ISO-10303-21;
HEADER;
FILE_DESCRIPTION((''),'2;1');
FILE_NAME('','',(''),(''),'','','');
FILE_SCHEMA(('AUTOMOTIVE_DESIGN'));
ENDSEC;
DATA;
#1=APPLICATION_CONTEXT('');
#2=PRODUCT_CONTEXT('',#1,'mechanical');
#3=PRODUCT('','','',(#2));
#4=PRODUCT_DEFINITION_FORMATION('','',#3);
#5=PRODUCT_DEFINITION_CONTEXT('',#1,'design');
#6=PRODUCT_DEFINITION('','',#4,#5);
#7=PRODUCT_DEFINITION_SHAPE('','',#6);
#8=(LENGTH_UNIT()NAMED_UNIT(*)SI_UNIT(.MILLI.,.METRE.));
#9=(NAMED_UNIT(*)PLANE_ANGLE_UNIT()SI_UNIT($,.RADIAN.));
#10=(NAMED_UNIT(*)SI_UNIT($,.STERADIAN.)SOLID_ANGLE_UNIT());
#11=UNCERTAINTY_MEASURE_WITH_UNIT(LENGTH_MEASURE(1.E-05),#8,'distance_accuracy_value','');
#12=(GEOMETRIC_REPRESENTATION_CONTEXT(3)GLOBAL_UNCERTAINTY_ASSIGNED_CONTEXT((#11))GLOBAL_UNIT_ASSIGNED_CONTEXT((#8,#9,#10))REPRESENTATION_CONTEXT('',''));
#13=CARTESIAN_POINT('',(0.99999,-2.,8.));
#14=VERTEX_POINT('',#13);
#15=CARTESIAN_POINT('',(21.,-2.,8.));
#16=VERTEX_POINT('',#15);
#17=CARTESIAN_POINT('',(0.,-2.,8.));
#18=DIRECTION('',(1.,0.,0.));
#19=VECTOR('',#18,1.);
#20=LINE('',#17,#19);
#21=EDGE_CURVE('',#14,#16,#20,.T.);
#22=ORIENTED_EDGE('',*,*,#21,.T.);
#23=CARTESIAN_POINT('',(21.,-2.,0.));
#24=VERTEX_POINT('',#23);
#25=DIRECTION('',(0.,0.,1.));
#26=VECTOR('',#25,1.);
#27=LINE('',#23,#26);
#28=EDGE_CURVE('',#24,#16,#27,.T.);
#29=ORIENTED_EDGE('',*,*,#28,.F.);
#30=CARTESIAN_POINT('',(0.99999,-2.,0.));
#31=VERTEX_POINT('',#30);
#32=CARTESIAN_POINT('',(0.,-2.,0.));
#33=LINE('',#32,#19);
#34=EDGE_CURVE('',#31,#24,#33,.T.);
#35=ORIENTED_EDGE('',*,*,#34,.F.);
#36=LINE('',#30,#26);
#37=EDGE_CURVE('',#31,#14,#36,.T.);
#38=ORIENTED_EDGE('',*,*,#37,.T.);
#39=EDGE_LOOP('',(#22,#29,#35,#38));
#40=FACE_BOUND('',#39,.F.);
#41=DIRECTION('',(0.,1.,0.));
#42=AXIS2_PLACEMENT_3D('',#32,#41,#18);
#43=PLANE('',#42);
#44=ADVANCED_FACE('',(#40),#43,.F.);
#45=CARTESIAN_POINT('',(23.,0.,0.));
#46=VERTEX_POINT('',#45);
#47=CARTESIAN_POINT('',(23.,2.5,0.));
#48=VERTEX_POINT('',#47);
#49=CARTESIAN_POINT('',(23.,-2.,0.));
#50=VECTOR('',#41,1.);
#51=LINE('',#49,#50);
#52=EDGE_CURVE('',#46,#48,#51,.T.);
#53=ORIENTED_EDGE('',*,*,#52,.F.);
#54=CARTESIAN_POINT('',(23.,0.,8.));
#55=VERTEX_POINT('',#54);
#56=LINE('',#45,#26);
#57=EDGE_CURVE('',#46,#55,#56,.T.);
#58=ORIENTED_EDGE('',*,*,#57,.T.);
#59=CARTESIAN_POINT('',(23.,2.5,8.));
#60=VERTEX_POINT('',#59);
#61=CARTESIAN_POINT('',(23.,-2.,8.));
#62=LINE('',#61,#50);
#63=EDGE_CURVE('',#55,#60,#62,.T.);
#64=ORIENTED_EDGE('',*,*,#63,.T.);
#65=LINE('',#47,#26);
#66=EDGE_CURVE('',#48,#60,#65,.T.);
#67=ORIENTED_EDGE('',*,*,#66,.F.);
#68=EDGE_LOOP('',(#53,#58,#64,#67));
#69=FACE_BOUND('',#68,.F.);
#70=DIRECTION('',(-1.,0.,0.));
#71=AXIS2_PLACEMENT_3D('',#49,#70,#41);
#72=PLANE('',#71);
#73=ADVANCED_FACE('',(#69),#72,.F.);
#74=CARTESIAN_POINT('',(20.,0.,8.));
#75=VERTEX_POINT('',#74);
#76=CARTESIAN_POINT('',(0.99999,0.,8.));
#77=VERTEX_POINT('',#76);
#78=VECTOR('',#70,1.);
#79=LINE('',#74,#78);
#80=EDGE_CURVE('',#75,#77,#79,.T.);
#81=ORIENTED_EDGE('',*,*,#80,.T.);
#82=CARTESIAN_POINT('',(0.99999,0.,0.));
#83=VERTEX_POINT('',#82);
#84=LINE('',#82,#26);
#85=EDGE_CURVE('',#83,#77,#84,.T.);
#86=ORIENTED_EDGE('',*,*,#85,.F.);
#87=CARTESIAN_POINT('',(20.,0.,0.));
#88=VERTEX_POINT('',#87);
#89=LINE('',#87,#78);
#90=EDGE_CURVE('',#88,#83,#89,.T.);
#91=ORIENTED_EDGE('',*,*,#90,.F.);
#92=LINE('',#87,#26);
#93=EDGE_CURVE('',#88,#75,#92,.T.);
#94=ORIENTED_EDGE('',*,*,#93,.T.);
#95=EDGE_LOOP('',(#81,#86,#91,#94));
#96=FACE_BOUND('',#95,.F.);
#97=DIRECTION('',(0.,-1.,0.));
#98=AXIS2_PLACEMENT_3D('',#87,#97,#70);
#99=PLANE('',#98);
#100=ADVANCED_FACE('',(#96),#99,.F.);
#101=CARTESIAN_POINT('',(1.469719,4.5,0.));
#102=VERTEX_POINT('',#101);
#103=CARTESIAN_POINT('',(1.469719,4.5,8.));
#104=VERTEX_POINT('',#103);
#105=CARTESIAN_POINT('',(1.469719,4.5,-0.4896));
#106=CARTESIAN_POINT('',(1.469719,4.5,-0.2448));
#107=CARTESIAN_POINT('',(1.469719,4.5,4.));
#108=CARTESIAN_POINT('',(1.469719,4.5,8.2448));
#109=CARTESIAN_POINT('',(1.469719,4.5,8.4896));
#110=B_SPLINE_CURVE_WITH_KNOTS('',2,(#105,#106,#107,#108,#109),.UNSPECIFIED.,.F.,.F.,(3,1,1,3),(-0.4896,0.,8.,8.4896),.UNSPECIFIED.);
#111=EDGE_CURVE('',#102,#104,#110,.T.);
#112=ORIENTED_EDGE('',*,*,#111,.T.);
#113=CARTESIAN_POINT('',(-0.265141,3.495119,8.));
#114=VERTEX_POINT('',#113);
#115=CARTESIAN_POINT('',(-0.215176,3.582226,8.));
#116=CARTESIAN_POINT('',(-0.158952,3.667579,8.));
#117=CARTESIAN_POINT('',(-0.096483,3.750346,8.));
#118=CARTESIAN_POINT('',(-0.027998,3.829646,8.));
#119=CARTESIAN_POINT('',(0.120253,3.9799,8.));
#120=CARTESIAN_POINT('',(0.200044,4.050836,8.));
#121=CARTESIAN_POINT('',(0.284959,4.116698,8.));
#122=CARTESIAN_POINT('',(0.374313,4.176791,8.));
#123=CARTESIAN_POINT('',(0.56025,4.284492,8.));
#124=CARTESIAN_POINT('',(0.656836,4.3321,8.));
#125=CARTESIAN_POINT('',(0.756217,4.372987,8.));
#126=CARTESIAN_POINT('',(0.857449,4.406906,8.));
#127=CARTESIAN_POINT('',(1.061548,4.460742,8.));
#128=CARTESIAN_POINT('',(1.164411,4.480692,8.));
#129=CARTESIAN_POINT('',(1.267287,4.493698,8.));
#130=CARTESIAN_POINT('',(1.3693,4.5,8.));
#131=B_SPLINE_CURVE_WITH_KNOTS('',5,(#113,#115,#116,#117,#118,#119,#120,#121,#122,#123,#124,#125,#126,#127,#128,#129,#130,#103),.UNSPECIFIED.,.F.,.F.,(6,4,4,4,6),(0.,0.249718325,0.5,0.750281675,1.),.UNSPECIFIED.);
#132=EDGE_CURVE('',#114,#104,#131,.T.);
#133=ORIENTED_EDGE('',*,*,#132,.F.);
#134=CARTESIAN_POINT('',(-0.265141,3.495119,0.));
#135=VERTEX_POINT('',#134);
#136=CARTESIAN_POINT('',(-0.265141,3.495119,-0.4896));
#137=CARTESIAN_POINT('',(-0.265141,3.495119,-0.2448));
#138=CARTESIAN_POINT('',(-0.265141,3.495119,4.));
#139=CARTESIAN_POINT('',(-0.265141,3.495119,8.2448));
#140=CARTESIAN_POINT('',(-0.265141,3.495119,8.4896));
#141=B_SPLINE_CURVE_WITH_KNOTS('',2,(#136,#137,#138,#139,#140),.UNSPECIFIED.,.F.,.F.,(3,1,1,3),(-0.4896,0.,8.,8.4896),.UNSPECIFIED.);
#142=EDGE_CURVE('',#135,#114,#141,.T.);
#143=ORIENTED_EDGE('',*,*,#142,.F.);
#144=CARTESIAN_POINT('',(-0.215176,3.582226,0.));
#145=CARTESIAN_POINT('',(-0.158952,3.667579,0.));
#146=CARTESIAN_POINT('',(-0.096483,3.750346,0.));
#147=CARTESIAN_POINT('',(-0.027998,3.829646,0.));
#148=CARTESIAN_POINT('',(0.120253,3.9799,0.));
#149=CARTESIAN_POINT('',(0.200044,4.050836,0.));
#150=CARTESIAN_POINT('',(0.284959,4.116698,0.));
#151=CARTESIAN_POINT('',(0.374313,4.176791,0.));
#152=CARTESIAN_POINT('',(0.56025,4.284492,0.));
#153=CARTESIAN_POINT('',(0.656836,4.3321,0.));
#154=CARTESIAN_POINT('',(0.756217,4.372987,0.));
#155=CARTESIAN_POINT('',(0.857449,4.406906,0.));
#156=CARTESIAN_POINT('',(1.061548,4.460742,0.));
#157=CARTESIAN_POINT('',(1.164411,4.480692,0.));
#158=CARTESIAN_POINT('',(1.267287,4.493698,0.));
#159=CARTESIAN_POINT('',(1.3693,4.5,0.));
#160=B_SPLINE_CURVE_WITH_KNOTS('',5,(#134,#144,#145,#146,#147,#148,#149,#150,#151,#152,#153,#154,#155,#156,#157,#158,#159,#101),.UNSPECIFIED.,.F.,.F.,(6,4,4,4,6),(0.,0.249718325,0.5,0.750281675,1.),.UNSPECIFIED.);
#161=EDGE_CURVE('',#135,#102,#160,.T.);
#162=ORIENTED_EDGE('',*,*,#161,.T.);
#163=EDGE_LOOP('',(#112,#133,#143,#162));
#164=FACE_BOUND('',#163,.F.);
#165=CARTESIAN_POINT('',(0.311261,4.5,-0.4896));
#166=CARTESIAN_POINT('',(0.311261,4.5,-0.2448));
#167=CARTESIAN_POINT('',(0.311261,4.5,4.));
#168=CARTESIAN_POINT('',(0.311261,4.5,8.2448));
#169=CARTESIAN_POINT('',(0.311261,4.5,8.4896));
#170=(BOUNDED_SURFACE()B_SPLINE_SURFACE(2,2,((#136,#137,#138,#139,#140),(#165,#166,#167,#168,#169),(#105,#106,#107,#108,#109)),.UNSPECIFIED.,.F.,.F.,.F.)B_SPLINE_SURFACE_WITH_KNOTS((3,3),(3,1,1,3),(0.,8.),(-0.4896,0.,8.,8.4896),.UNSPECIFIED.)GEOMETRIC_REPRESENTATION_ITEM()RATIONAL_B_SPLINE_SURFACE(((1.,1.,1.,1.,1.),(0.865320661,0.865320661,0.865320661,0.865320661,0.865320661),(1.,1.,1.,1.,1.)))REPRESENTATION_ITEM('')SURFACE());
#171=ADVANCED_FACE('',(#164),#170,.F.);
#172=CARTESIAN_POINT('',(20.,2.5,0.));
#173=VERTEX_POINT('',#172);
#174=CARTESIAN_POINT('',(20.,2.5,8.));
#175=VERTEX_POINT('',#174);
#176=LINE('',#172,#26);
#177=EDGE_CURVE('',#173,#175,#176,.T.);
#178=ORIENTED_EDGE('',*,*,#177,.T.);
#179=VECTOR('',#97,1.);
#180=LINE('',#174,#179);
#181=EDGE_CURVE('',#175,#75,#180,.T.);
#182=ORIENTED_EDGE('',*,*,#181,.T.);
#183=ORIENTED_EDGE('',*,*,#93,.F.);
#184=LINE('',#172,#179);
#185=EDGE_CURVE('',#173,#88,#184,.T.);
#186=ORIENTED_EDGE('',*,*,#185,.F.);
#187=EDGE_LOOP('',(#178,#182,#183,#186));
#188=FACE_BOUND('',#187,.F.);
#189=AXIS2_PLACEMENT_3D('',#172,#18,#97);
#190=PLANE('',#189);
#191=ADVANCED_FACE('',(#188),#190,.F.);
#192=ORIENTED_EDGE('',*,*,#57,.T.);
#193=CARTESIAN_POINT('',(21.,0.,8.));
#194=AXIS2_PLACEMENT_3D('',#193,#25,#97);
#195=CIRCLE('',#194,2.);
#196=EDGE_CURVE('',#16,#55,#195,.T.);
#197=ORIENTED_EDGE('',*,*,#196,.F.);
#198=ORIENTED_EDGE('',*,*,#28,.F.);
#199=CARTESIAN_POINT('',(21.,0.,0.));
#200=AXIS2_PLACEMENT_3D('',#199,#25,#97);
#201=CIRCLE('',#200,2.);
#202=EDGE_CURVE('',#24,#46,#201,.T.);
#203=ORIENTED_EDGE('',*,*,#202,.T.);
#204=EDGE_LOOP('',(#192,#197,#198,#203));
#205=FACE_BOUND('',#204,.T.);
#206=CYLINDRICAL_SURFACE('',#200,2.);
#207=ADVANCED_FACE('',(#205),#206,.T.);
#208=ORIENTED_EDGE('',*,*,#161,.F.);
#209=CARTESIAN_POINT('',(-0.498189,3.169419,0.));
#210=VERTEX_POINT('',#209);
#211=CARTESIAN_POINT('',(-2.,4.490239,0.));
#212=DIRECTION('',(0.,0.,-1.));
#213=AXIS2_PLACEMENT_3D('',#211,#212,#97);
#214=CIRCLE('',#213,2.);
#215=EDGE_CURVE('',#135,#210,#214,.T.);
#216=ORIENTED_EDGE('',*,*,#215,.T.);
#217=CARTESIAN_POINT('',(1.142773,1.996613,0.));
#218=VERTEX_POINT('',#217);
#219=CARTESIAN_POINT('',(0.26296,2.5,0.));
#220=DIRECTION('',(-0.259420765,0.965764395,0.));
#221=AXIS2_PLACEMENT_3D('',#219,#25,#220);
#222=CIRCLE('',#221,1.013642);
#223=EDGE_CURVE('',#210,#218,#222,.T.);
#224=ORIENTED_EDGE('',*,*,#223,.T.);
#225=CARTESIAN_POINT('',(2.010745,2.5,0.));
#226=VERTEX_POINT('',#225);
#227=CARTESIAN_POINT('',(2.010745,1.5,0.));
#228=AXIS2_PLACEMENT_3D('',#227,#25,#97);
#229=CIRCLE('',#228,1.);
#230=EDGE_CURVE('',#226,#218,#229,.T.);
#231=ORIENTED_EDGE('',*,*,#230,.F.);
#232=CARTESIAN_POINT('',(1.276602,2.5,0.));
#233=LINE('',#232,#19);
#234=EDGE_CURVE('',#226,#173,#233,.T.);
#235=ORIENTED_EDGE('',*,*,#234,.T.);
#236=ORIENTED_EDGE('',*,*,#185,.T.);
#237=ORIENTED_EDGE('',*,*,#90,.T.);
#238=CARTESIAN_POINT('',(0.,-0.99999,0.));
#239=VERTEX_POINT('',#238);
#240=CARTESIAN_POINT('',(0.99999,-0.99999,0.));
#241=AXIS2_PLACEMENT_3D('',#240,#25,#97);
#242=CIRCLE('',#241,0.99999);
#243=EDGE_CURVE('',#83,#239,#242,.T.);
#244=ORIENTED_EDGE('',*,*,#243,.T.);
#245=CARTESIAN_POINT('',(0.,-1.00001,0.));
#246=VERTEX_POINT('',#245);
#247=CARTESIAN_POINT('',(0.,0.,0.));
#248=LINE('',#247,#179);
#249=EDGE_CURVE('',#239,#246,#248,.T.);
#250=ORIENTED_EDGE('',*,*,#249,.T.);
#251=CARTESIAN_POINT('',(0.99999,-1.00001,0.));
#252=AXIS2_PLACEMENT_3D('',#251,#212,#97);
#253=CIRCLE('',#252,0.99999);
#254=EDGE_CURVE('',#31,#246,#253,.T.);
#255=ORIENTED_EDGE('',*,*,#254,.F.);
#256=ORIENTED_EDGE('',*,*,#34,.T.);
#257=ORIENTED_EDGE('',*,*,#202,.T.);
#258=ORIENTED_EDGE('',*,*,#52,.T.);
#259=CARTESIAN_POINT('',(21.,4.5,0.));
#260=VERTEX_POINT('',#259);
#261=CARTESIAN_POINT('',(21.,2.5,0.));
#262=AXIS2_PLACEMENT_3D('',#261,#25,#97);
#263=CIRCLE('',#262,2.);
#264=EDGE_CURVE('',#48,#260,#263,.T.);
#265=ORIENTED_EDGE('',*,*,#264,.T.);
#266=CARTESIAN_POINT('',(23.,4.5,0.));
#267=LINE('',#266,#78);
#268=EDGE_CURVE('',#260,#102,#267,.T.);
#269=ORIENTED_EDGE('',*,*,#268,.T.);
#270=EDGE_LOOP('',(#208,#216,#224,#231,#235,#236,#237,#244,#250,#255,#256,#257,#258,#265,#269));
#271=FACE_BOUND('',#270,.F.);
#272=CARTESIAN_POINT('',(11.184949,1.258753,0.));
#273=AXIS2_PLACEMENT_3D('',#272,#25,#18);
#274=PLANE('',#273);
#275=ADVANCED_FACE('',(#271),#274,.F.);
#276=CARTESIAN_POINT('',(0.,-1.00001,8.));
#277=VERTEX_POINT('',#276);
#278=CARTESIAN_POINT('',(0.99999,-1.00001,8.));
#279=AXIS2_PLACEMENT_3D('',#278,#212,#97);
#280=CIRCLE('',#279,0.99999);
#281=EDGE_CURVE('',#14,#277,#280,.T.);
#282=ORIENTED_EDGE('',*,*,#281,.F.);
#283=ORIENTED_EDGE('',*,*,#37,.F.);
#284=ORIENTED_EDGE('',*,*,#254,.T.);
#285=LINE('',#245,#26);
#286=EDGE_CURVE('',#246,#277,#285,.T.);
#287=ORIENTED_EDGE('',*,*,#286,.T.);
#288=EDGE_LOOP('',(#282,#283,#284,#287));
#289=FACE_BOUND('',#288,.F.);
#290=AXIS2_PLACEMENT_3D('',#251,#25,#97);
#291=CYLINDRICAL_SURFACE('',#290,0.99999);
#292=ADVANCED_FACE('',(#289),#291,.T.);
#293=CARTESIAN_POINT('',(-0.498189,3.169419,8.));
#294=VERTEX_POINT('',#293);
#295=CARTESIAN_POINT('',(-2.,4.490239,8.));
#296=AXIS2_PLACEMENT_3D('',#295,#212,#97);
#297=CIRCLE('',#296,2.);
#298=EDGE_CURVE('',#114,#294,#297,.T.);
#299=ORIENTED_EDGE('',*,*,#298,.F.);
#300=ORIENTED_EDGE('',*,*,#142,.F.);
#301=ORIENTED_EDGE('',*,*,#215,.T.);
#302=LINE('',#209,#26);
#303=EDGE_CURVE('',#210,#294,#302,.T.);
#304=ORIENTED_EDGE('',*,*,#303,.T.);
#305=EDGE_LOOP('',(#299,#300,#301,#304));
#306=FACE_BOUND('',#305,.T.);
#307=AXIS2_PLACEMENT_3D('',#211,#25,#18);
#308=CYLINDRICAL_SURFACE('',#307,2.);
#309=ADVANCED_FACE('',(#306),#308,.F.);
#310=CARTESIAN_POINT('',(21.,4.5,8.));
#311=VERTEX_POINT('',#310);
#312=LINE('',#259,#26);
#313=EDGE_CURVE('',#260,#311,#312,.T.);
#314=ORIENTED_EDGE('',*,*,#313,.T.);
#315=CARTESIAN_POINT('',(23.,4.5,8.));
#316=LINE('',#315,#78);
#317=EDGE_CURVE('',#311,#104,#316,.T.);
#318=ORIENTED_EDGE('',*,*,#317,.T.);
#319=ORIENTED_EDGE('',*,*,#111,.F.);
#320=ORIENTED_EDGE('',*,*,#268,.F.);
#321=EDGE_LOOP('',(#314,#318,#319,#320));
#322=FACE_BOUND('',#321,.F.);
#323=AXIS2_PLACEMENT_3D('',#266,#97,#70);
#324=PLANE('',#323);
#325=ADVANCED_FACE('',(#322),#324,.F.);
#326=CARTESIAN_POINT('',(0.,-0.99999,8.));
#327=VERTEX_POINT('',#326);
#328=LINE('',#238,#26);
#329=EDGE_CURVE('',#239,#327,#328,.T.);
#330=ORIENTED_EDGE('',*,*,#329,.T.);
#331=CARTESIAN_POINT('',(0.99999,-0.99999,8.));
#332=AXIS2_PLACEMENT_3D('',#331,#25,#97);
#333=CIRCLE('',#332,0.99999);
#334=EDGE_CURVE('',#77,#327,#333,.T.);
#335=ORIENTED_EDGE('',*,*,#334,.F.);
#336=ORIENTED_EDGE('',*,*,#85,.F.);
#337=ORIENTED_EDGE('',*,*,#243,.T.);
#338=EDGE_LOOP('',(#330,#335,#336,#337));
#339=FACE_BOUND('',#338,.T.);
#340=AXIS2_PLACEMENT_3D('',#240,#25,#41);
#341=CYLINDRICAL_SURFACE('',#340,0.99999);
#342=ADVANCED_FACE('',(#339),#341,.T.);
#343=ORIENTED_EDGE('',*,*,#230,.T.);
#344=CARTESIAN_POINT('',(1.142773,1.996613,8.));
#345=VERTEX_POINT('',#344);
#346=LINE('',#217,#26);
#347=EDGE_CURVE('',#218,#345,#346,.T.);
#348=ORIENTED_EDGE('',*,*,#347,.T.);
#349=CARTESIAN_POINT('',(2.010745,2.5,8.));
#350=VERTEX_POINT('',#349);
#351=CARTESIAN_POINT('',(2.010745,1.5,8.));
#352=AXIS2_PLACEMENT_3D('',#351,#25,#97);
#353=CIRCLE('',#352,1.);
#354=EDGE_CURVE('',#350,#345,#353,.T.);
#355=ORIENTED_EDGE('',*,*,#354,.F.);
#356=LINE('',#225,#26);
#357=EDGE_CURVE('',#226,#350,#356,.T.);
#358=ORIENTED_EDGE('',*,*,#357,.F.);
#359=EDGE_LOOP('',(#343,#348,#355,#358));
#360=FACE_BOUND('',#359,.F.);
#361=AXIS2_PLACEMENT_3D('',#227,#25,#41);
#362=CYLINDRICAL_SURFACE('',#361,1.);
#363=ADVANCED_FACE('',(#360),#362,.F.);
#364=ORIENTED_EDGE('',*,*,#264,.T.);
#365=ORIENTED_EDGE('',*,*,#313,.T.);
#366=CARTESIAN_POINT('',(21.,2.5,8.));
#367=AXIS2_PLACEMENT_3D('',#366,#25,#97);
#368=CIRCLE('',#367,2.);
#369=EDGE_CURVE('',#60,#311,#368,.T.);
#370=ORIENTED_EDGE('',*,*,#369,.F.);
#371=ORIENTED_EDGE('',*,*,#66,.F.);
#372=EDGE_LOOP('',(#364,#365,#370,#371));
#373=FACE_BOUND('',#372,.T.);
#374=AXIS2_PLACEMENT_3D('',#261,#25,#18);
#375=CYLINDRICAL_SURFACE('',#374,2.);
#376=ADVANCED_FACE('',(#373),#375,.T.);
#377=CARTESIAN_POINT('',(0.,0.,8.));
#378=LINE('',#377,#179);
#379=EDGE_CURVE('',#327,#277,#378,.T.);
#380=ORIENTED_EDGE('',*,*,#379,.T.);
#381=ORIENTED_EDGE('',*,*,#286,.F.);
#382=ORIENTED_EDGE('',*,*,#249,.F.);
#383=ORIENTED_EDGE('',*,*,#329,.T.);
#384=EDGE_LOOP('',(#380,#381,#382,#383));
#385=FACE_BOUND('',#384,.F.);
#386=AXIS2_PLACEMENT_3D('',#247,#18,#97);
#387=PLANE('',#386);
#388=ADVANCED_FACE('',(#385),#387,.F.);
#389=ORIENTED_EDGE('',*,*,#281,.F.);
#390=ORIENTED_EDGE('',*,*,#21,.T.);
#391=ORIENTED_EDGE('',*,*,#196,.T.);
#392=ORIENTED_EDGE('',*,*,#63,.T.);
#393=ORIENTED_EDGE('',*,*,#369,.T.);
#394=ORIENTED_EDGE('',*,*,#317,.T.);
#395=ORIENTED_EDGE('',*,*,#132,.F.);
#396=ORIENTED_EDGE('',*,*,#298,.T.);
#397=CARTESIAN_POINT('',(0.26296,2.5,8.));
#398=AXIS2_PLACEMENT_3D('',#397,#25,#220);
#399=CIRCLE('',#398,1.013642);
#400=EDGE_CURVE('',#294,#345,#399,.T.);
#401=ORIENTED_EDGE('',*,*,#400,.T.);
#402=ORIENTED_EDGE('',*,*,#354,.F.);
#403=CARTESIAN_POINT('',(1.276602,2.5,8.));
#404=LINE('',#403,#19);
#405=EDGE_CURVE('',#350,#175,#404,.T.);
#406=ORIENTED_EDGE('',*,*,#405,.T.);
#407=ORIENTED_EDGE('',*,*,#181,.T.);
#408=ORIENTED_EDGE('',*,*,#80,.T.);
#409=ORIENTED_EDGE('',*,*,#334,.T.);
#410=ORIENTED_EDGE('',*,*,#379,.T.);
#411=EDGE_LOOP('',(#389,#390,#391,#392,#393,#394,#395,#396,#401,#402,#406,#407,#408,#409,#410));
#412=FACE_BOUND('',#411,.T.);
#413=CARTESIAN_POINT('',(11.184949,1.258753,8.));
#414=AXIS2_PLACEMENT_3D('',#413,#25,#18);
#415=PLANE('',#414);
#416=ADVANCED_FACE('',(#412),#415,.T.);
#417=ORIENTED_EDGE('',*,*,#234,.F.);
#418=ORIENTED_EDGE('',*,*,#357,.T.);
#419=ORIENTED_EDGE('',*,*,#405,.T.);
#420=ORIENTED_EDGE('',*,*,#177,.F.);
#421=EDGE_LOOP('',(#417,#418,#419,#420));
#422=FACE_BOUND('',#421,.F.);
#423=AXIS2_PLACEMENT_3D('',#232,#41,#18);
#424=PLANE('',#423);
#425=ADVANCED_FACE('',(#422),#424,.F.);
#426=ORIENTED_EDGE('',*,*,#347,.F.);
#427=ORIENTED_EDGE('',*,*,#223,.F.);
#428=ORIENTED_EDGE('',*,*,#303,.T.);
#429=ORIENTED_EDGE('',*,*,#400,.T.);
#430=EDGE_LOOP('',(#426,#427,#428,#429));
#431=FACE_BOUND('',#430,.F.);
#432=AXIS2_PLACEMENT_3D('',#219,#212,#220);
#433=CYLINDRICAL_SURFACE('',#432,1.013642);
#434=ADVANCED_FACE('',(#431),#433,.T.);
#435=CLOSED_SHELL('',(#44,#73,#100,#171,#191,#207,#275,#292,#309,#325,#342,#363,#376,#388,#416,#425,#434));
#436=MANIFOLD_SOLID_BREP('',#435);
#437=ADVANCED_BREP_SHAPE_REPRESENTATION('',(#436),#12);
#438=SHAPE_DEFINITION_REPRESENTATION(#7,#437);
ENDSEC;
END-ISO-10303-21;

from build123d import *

# Parameters (mm, degrees)
F1_DEPTH = 8
F2_R     = 2
F3_R     = 1
F4_R     = 2
F5_R     = 0.99999


# Not quite as in the source:
# - a fillet or chamfer is up to 0.001 mm smaller than in the source, because OpenCascade refuses the exact size


with BuildPart() as f1:
    # F0 (on Top) → F1 (new body)
    with BuildSketch(Plane.XY):
        with BuildLine():
            Line((20, 0), (0, 0))
            Line((0, 0), (0, -2))
            Line((0, -2), (23, -2))
            Line((23, -2), (23, 4.5))
            Line((23, 4.5), (0, 4.5))
            Line((0, 4.5), (0, 3.478939205))
            ThreePointArc((0, 3.478939205), (-0.3538557851, 1.6956316782), (1.2766015908, 2.5))
            Line((1.2766015908, 2.5), (20, 2.5))
            Line((20, 2.5), (20, 0))
        make_face()
    extrude(amount=F1_DEPTH)

    # F2
    f2_edges = [f1.edges().sort_by_distance(p)[0] for p in [
        (23, -2, 4),
        (23, 4.5, 4),
        (0, 3.478939, 4),
    ]]
    fillet(f2_edges, radius=F2_R)

    # F3
    f3_edges = [f1.edges().sort_by_distance(p)[0] for p in [
        (1.276602, 2.5, 4),
    ]]
    fillet(f3_edges, radius=F3_R)

    # F4
    f4_edges = [f1.edges().sort_by_distance(p)[0] for p in [
        (0, 4.5, 4),
    ]]
    fillet(f4_edges, radius=F4_R)

    # F5 (radius 1 in the source; OpenCascade refuses exactly that, so slightly less here)
    f5_edges = [f1.edges().sort_by_distance(p)[0] for p in [
        (0, 0, 4),
        (0, -2, 4),
    ]]
    fillet(f5_edges, radius=F5_R)


solid = f1.part
